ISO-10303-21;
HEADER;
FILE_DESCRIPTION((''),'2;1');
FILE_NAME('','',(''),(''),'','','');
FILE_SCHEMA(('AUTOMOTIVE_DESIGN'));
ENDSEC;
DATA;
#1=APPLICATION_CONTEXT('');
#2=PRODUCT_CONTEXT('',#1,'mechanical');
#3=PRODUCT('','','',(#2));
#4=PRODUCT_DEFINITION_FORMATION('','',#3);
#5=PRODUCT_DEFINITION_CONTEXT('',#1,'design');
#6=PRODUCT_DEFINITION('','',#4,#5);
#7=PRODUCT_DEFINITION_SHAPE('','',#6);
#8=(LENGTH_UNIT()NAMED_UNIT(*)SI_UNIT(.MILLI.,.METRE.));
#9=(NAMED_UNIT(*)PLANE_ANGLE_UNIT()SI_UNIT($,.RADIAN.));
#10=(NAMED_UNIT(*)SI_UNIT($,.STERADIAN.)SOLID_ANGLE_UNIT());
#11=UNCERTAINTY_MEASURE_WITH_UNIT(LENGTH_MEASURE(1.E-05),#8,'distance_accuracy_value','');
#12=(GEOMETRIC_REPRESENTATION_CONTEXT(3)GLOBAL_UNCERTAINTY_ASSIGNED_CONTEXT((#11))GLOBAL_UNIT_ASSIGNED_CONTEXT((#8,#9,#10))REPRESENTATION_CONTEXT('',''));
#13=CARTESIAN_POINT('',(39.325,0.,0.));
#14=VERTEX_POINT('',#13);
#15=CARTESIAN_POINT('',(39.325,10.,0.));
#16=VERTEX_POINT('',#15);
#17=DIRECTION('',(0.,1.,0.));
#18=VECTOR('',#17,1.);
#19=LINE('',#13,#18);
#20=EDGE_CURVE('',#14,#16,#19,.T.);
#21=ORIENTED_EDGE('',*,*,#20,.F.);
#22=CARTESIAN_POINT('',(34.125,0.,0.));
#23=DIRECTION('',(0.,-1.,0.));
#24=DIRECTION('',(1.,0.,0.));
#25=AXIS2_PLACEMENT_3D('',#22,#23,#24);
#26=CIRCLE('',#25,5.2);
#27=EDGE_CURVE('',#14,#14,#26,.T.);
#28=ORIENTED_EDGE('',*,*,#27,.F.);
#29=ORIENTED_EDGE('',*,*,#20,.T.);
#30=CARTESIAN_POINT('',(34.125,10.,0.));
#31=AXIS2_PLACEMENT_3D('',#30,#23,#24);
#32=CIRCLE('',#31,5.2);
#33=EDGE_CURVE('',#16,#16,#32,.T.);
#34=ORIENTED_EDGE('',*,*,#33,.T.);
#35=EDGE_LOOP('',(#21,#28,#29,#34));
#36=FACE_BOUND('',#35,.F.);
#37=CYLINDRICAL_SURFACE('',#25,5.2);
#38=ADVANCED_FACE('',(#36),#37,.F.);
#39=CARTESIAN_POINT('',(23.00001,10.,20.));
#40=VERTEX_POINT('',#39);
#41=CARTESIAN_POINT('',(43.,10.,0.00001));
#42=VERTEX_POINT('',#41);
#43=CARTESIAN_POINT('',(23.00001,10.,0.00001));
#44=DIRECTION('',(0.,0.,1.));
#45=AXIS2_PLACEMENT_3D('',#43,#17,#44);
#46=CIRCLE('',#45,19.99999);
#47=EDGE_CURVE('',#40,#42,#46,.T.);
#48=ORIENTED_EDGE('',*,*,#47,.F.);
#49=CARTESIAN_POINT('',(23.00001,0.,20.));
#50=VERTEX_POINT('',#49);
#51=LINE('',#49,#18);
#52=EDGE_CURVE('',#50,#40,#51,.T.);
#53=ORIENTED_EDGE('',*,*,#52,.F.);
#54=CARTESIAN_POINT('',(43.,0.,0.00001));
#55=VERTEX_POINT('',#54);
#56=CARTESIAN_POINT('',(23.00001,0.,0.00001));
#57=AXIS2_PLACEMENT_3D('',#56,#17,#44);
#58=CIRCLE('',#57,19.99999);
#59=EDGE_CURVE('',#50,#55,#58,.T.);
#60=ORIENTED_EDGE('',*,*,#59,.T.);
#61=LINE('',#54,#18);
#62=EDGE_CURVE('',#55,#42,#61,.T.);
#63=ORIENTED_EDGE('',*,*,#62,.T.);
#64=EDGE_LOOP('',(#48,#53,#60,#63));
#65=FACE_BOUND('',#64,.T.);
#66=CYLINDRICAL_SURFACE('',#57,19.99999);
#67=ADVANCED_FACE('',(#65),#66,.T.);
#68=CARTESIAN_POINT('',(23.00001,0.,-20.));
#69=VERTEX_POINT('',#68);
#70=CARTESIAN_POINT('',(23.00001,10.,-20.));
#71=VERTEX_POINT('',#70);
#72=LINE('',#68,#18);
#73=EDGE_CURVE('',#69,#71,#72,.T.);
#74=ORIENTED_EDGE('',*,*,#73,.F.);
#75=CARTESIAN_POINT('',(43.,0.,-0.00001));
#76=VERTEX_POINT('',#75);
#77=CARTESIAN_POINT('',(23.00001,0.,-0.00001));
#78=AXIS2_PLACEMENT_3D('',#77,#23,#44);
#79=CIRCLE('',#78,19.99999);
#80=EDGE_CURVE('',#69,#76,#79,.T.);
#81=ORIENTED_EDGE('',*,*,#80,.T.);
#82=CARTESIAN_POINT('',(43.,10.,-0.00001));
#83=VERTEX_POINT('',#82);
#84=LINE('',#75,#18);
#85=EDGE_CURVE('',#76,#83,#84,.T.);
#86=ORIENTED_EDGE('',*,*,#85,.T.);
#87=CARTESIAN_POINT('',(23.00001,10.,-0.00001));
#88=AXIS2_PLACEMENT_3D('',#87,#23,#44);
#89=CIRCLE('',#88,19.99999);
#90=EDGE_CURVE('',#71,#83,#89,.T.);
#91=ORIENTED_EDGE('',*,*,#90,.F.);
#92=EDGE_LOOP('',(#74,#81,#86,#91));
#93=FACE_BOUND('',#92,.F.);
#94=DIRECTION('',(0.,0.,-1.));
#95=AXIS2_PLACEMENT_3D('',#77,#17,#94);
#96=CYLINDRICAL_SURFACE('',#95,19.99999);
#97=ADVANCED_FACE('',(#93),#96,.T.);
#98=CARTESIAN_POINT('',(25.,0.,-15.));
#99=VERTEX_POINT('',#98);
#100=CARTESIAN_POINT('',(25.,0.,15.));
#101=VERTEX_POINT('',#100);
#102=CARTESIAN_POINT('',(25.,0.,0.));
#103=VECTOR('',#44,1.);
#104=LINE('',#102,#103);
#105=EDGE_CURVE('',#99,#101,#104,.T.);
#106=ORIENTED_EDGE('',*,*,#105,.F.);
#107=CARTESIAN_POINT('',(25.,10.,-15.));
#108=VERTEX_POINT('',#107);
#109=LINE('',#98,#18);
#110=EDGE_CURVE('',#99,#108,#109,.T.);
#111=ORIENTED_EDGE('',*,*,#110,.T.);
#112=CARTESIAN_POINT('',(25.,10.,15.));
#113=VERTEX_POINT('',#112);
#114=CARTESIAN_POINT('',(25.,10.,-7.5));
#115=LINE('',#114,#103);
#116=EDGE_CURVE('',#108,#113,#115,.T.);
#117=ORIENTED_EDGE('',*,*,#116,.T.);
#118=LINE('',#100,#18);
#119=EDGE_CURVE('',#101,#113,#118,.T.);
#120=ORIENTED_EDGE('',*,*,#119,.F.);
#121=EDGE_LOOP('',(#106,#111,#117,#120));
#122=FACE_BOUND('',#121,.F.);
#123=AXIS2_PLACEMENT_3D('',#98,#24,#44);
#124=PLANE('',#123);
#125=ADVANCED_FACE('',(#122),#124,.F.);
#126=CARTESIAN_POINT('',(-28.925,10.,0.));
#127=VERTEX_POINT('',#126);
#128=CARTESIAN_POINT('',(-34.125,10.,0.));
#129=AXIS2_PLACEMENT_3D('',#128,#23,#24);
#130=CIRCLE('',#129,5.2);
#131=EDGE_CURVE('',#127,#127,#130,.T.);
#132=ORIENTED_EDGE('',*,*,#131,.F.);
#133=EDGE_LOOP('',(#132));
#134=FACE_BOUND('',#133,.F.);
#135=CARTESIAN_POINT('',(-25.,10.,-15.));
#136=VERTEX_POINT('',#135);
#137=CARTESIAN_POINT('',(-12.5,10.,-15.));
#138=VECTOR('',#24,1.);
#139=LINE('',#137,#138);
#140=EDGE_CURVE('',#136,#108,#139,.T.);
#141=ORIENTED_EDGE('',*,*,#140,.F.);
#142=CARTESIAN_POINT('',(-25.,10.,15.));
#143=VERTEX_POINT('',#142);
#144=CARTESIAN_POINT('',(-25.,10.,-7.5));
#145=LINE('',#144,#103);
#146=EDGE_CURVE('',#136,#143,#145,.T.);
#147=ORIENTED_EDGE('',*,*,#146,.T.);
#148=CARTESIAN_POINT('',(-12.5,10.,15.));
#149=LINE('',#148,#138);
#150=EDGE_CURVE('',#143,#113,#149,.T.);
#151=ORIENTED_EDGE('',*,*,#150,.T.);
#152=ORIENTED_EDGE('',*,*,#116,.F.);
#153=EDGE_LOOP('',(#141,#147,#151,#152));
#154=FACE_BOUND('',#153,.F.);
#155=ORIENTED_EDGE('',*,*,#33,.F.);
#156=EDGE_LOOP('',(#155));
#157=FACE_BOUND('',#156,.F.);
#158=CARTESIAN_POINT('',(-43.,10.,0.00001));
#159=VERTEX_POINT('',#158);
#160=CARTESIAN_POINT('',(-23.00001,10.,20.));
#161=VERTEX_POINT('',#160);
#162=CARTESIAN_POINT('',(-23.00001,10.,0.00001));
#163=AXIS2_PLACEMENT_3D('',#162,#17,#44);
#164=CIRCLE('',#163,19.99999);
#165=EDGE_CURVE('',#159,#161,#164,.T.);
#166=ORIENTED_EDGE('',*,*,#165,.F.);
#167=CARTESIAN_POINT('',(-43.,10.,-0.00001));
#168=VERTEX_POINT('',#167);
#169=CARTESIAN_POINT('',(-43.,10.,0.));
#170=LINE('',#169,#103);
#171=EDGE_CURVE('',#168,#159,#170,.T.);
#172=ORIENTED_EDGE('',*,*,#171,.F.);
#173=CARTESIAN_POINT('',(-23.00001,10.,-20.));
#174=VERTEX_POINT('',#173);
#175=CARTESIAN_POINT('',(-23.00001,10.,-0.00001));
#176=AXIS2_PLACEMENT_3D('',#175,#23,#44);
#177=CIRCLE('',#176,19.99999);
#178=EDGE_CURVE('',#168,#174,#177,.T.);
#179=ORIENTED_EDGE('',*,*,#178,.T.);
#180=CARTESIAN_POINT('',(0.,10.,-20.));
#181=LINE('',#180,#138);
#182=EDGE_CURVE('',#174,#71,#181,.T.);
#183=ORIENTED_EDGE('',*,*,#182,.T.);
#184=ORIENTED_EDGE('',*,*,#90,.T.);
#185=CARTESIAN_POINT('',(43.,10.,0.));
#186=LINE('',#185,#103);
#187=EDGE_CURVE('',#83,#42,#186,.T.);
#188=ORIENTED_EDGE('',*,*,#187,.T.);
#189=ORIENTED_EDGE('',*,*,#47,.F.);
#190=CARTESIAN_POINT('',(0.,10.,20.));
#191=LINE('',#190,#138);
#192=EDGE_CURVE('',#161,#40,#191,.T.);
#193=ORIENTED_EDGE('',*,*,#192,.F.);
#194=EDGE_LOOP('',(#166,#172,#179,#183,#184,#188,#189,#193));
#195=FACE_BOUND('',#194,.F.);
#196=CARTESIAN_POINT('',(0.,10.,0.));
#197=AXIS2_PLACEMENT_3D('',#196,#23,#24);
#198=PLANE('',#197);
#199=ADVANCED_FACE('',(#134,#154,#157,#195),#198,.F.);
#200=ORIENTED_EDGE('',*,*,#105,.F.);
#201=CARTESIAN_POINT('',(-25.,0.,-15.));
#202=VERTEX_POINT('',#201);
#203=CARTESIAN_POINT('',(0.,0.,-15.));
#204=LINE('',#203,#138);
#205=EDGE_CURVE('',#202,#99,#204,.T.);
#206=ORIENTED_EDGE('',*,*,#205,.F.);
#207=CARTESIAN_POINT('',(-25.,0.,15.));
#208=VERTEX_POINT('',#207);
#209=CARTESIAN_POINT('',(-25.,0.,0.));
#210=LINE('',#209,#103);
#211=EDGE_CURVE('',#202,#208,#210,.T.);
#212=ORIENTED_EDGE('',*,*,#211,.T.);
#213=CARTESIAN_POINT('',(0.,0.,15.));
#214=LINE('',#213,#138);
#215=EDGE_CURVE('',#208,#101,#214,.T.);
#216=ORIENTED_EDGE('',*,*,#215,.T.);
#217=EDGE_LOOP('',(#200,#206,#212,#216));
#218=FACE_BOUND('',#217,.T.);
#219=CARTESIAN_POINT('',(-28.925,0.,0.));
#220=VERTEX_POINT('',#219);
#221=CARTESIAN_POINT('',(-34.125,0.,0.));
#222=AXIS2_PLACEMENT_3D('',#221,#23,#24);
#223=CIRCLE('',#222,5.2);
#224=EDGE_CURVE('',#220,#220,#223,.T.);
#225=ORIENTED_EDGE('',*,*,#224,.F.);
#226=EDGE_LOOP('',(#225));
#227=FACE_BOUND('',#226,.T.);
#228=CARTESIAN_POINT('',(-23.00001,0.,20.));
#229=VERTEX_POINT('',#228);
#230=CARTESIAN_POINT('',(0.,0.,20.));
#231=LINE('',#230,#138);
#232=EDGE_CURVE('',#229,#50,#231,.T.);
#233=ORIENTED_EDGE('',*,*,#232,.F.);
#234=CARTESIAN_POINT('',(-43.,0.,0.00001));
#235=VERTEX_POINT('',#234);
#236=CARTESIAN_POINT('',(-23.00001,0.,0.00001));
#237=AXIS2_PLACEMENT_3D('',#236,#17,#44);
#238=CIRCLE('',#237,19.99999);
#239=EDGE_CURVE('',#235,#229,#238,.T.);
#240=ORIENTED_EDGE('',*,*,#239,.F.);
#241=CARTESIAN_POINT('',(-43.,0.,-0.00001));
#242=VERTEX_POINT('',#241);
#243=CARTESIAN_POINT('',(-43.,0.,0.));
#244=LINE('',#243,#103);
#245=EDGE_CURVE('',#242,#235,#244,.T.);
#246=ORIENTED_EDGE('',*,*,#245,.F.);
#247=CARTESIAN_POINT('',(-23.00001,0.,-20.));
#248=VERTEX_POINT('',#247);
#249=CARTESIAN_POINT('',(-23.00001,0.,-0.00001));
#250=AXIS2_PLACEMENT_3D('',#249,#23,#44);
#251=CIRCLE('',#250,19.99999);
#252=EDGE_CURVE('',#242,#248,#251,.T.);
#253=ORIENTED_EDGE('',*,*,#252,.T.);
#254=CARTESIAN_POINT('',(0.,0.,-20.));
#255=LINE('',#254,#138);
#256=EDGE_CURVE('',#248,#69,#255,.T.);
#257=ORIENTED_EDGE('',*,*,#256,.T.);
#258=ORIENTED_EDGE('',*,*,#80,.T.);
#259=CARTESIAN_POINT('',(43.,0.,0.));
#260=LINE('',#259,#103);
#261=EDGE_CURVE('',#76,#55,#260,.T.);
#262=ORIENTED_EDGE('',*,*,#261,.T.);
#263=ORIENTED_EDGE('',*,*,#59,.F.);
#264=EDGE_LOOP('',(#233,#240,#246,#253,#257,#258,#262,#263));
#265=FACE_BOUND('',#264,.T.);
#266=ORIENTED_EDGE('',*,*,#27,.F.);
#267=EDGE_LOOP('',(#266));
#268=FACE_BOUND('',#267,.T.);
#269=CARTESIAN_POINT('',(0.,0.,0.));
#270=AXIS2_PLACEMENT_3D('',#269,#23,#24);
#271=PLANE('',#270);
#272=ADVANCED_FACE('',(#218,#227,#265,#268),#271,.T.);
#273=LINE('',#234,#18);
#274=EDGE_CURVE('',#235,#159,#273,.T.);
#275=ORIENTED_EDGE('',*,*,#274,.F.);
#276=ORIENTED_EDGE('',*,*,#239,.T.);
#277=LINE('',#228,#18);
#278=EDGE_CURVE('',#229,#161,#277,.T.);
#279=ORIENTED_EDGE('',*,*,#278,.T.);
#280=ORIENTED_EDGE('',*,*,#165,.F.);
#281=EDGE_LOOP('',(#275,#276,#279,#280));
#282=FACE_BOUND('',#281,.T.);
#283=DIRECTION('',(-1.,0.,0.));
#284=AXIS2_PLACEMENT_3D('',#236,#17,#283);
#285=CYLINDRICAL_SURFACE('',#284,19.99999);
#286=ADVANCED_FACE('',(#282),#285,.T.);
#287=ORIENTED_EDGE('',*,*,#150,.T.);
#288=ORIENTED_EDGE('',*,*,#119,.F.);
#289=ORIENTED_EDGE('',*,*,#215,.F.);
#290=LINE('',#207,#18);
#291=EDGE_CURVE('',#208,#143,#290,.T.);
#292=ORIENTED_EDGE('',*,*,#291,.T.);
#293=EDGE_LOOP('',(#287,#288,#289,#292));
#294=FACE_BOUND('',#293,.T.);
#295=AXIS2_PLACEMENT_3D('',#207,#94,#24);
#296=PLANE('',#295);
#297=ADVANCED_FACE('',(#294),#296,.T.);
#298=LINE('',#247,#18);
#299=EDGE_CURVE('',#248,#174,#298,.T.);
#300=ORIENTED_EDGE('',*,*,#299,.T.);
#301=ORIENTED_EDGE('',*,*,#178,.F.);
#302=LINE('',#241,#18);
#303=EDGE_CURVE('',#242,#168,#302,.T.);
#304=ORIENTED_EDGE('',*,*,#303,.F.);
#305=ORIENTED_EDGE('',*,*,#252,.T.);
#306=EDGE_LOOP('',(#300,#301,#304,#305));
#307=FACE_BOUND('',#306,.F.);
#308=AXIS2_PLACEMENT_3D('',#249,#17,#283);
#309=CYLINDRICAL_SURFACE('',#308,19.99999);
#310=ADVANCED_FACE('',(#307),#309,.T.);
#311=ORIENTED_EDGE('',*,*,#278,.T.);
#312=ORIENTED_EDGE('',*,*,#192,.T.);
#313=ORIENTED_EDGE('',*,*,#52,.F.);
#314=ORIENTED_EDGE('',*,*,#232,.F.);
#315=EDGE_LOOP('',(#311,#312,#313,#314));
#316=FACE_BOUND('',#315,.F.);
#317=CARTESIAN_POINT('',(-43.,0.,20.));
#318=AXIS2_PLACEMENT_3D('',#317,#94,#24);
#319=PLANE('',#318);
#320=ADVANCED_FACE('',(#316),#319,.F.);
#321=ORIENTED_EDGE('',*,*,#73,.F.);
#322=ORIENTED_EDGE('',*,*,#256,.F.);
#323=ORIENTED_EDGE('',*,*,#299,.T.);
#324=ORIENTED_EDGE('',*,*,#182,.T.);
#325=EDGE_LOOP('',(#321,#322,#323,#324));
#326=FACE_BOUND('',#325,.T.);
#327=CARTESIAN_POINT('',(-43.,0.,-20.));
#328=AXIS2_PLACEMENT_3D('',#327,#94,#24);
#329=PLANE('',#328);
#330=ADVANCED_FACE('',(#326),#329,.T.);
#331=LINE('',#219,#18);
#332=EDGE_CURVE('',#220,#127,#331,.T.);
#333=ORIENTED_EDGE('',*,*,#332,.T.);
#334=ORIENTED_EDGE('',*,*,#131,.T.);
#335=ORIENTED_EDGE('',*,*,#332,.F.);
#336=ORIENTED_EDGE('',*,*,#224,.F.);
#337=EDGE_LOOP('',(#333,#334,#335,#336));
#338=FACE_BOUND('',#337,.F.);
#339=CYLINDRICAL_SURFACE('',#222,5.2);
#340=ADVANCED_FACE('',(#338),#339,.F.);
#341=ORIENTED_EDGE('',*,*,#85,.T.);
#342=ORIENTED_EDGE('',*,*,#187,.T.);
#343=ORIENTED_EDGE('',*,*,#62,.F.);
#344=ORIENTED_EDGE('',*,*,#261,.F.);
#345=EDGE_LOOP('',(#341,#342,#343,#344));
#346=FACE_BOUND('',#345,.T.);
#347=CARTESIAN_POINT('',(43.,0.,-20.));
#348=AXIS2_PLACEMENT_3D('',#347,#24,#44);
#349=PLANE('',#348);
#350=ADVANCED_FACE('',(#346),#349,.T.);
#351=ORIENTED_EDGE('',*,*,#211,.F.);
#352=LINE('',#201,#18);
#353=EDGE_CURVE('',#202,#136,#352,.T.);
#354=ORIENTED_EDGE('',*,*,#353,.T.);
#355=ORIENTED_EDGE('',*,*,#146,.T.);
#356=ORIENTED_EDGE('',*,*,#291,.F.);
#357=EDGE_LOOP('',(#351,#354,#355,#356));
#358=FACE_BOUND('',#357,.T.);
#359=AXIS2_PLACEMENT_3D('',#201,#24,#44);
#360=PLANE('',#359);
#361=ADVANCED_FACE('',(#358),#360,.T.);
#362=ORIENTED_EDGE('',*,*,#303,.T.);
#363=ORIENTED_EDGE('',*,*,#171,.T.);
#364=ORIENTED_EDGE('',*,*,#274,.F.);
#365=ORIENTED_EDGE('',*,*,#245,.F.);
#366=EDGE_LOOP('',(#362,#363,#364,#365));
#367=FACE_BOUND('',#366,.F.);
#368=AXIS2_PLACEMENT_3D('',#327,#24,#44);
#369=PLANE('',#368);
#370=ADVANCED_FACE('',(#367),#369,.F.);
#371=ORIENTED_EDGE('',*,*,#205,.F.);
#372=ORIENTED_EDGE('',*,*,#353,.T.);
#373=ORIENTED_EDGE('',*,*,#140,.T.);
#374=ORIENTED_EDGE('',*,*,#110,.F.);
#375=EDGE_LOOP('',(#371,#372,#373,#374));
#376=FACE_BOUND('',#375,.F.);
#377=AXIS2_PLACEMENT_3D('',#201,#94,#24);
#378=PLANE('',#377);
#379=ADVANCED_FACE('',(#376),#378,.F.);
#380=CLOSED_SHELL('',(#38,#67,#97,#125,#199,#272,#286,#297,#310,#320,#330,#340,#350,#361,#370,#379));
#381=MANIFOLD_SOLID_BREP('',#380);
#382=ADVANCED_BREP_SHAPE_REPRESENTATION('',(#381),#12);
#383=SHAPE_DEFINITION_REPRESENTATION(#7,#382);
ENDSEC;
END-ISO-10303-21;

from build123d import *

# Parameters (mm, degrees)
F0_W     = 86
F0_H     = 40
F1_DEPTH = 10
F2_R     = 5.2
F3_DEPTH = 25
F4_W     = 50
F4_H     = 30
F5_DEPTH = 25
F6_R     = 19.99999


# Not quite as in the source:
# - a fillet or chamfer is up to 0.001 mm smaller than in the source, because OpenCascade refuses the exact size


with BuildPart() as f1:
    # F0 (on Front) → F1 (new body)
    with BuildSketch(Plane.XZ):
        Rectangle(F0_W, F0_H)
    extrude(amount=-F1_DEPTH)

    # F2 (on face) → F3 (cut)
    with BuildSketch(Plane.XZ):
        with Locations((-34.125, 0)):
            Circle(F2_R)
        with Locations((34.125, 0)):
            Circle(F2_R)
    extrude(amount=-F3_DEPTH, mode=Mode.SUBTRACT)

    # F4 (on face) → F5 (cut)
    with BuildSketch(Plane.XZ):
        Rectangle(F4_W, F4_H)
    extrude(amount=-F5_DEPTH, mode=Mode.SUBTRACT)

    # F6 (radius 20 in the source; OpenCascade refuses exactly that, so slightly less here)
    f6_edges = [f1.edges().sort_by_distance(p)[0] for p in [
        (-43, 5, 20),
        (43, 5, 20),
        (43, 5, -20),
        (-43, 5, -20),
    ]]
    fillet(f6_edges, radius=F6_R)


solid = f1.part
